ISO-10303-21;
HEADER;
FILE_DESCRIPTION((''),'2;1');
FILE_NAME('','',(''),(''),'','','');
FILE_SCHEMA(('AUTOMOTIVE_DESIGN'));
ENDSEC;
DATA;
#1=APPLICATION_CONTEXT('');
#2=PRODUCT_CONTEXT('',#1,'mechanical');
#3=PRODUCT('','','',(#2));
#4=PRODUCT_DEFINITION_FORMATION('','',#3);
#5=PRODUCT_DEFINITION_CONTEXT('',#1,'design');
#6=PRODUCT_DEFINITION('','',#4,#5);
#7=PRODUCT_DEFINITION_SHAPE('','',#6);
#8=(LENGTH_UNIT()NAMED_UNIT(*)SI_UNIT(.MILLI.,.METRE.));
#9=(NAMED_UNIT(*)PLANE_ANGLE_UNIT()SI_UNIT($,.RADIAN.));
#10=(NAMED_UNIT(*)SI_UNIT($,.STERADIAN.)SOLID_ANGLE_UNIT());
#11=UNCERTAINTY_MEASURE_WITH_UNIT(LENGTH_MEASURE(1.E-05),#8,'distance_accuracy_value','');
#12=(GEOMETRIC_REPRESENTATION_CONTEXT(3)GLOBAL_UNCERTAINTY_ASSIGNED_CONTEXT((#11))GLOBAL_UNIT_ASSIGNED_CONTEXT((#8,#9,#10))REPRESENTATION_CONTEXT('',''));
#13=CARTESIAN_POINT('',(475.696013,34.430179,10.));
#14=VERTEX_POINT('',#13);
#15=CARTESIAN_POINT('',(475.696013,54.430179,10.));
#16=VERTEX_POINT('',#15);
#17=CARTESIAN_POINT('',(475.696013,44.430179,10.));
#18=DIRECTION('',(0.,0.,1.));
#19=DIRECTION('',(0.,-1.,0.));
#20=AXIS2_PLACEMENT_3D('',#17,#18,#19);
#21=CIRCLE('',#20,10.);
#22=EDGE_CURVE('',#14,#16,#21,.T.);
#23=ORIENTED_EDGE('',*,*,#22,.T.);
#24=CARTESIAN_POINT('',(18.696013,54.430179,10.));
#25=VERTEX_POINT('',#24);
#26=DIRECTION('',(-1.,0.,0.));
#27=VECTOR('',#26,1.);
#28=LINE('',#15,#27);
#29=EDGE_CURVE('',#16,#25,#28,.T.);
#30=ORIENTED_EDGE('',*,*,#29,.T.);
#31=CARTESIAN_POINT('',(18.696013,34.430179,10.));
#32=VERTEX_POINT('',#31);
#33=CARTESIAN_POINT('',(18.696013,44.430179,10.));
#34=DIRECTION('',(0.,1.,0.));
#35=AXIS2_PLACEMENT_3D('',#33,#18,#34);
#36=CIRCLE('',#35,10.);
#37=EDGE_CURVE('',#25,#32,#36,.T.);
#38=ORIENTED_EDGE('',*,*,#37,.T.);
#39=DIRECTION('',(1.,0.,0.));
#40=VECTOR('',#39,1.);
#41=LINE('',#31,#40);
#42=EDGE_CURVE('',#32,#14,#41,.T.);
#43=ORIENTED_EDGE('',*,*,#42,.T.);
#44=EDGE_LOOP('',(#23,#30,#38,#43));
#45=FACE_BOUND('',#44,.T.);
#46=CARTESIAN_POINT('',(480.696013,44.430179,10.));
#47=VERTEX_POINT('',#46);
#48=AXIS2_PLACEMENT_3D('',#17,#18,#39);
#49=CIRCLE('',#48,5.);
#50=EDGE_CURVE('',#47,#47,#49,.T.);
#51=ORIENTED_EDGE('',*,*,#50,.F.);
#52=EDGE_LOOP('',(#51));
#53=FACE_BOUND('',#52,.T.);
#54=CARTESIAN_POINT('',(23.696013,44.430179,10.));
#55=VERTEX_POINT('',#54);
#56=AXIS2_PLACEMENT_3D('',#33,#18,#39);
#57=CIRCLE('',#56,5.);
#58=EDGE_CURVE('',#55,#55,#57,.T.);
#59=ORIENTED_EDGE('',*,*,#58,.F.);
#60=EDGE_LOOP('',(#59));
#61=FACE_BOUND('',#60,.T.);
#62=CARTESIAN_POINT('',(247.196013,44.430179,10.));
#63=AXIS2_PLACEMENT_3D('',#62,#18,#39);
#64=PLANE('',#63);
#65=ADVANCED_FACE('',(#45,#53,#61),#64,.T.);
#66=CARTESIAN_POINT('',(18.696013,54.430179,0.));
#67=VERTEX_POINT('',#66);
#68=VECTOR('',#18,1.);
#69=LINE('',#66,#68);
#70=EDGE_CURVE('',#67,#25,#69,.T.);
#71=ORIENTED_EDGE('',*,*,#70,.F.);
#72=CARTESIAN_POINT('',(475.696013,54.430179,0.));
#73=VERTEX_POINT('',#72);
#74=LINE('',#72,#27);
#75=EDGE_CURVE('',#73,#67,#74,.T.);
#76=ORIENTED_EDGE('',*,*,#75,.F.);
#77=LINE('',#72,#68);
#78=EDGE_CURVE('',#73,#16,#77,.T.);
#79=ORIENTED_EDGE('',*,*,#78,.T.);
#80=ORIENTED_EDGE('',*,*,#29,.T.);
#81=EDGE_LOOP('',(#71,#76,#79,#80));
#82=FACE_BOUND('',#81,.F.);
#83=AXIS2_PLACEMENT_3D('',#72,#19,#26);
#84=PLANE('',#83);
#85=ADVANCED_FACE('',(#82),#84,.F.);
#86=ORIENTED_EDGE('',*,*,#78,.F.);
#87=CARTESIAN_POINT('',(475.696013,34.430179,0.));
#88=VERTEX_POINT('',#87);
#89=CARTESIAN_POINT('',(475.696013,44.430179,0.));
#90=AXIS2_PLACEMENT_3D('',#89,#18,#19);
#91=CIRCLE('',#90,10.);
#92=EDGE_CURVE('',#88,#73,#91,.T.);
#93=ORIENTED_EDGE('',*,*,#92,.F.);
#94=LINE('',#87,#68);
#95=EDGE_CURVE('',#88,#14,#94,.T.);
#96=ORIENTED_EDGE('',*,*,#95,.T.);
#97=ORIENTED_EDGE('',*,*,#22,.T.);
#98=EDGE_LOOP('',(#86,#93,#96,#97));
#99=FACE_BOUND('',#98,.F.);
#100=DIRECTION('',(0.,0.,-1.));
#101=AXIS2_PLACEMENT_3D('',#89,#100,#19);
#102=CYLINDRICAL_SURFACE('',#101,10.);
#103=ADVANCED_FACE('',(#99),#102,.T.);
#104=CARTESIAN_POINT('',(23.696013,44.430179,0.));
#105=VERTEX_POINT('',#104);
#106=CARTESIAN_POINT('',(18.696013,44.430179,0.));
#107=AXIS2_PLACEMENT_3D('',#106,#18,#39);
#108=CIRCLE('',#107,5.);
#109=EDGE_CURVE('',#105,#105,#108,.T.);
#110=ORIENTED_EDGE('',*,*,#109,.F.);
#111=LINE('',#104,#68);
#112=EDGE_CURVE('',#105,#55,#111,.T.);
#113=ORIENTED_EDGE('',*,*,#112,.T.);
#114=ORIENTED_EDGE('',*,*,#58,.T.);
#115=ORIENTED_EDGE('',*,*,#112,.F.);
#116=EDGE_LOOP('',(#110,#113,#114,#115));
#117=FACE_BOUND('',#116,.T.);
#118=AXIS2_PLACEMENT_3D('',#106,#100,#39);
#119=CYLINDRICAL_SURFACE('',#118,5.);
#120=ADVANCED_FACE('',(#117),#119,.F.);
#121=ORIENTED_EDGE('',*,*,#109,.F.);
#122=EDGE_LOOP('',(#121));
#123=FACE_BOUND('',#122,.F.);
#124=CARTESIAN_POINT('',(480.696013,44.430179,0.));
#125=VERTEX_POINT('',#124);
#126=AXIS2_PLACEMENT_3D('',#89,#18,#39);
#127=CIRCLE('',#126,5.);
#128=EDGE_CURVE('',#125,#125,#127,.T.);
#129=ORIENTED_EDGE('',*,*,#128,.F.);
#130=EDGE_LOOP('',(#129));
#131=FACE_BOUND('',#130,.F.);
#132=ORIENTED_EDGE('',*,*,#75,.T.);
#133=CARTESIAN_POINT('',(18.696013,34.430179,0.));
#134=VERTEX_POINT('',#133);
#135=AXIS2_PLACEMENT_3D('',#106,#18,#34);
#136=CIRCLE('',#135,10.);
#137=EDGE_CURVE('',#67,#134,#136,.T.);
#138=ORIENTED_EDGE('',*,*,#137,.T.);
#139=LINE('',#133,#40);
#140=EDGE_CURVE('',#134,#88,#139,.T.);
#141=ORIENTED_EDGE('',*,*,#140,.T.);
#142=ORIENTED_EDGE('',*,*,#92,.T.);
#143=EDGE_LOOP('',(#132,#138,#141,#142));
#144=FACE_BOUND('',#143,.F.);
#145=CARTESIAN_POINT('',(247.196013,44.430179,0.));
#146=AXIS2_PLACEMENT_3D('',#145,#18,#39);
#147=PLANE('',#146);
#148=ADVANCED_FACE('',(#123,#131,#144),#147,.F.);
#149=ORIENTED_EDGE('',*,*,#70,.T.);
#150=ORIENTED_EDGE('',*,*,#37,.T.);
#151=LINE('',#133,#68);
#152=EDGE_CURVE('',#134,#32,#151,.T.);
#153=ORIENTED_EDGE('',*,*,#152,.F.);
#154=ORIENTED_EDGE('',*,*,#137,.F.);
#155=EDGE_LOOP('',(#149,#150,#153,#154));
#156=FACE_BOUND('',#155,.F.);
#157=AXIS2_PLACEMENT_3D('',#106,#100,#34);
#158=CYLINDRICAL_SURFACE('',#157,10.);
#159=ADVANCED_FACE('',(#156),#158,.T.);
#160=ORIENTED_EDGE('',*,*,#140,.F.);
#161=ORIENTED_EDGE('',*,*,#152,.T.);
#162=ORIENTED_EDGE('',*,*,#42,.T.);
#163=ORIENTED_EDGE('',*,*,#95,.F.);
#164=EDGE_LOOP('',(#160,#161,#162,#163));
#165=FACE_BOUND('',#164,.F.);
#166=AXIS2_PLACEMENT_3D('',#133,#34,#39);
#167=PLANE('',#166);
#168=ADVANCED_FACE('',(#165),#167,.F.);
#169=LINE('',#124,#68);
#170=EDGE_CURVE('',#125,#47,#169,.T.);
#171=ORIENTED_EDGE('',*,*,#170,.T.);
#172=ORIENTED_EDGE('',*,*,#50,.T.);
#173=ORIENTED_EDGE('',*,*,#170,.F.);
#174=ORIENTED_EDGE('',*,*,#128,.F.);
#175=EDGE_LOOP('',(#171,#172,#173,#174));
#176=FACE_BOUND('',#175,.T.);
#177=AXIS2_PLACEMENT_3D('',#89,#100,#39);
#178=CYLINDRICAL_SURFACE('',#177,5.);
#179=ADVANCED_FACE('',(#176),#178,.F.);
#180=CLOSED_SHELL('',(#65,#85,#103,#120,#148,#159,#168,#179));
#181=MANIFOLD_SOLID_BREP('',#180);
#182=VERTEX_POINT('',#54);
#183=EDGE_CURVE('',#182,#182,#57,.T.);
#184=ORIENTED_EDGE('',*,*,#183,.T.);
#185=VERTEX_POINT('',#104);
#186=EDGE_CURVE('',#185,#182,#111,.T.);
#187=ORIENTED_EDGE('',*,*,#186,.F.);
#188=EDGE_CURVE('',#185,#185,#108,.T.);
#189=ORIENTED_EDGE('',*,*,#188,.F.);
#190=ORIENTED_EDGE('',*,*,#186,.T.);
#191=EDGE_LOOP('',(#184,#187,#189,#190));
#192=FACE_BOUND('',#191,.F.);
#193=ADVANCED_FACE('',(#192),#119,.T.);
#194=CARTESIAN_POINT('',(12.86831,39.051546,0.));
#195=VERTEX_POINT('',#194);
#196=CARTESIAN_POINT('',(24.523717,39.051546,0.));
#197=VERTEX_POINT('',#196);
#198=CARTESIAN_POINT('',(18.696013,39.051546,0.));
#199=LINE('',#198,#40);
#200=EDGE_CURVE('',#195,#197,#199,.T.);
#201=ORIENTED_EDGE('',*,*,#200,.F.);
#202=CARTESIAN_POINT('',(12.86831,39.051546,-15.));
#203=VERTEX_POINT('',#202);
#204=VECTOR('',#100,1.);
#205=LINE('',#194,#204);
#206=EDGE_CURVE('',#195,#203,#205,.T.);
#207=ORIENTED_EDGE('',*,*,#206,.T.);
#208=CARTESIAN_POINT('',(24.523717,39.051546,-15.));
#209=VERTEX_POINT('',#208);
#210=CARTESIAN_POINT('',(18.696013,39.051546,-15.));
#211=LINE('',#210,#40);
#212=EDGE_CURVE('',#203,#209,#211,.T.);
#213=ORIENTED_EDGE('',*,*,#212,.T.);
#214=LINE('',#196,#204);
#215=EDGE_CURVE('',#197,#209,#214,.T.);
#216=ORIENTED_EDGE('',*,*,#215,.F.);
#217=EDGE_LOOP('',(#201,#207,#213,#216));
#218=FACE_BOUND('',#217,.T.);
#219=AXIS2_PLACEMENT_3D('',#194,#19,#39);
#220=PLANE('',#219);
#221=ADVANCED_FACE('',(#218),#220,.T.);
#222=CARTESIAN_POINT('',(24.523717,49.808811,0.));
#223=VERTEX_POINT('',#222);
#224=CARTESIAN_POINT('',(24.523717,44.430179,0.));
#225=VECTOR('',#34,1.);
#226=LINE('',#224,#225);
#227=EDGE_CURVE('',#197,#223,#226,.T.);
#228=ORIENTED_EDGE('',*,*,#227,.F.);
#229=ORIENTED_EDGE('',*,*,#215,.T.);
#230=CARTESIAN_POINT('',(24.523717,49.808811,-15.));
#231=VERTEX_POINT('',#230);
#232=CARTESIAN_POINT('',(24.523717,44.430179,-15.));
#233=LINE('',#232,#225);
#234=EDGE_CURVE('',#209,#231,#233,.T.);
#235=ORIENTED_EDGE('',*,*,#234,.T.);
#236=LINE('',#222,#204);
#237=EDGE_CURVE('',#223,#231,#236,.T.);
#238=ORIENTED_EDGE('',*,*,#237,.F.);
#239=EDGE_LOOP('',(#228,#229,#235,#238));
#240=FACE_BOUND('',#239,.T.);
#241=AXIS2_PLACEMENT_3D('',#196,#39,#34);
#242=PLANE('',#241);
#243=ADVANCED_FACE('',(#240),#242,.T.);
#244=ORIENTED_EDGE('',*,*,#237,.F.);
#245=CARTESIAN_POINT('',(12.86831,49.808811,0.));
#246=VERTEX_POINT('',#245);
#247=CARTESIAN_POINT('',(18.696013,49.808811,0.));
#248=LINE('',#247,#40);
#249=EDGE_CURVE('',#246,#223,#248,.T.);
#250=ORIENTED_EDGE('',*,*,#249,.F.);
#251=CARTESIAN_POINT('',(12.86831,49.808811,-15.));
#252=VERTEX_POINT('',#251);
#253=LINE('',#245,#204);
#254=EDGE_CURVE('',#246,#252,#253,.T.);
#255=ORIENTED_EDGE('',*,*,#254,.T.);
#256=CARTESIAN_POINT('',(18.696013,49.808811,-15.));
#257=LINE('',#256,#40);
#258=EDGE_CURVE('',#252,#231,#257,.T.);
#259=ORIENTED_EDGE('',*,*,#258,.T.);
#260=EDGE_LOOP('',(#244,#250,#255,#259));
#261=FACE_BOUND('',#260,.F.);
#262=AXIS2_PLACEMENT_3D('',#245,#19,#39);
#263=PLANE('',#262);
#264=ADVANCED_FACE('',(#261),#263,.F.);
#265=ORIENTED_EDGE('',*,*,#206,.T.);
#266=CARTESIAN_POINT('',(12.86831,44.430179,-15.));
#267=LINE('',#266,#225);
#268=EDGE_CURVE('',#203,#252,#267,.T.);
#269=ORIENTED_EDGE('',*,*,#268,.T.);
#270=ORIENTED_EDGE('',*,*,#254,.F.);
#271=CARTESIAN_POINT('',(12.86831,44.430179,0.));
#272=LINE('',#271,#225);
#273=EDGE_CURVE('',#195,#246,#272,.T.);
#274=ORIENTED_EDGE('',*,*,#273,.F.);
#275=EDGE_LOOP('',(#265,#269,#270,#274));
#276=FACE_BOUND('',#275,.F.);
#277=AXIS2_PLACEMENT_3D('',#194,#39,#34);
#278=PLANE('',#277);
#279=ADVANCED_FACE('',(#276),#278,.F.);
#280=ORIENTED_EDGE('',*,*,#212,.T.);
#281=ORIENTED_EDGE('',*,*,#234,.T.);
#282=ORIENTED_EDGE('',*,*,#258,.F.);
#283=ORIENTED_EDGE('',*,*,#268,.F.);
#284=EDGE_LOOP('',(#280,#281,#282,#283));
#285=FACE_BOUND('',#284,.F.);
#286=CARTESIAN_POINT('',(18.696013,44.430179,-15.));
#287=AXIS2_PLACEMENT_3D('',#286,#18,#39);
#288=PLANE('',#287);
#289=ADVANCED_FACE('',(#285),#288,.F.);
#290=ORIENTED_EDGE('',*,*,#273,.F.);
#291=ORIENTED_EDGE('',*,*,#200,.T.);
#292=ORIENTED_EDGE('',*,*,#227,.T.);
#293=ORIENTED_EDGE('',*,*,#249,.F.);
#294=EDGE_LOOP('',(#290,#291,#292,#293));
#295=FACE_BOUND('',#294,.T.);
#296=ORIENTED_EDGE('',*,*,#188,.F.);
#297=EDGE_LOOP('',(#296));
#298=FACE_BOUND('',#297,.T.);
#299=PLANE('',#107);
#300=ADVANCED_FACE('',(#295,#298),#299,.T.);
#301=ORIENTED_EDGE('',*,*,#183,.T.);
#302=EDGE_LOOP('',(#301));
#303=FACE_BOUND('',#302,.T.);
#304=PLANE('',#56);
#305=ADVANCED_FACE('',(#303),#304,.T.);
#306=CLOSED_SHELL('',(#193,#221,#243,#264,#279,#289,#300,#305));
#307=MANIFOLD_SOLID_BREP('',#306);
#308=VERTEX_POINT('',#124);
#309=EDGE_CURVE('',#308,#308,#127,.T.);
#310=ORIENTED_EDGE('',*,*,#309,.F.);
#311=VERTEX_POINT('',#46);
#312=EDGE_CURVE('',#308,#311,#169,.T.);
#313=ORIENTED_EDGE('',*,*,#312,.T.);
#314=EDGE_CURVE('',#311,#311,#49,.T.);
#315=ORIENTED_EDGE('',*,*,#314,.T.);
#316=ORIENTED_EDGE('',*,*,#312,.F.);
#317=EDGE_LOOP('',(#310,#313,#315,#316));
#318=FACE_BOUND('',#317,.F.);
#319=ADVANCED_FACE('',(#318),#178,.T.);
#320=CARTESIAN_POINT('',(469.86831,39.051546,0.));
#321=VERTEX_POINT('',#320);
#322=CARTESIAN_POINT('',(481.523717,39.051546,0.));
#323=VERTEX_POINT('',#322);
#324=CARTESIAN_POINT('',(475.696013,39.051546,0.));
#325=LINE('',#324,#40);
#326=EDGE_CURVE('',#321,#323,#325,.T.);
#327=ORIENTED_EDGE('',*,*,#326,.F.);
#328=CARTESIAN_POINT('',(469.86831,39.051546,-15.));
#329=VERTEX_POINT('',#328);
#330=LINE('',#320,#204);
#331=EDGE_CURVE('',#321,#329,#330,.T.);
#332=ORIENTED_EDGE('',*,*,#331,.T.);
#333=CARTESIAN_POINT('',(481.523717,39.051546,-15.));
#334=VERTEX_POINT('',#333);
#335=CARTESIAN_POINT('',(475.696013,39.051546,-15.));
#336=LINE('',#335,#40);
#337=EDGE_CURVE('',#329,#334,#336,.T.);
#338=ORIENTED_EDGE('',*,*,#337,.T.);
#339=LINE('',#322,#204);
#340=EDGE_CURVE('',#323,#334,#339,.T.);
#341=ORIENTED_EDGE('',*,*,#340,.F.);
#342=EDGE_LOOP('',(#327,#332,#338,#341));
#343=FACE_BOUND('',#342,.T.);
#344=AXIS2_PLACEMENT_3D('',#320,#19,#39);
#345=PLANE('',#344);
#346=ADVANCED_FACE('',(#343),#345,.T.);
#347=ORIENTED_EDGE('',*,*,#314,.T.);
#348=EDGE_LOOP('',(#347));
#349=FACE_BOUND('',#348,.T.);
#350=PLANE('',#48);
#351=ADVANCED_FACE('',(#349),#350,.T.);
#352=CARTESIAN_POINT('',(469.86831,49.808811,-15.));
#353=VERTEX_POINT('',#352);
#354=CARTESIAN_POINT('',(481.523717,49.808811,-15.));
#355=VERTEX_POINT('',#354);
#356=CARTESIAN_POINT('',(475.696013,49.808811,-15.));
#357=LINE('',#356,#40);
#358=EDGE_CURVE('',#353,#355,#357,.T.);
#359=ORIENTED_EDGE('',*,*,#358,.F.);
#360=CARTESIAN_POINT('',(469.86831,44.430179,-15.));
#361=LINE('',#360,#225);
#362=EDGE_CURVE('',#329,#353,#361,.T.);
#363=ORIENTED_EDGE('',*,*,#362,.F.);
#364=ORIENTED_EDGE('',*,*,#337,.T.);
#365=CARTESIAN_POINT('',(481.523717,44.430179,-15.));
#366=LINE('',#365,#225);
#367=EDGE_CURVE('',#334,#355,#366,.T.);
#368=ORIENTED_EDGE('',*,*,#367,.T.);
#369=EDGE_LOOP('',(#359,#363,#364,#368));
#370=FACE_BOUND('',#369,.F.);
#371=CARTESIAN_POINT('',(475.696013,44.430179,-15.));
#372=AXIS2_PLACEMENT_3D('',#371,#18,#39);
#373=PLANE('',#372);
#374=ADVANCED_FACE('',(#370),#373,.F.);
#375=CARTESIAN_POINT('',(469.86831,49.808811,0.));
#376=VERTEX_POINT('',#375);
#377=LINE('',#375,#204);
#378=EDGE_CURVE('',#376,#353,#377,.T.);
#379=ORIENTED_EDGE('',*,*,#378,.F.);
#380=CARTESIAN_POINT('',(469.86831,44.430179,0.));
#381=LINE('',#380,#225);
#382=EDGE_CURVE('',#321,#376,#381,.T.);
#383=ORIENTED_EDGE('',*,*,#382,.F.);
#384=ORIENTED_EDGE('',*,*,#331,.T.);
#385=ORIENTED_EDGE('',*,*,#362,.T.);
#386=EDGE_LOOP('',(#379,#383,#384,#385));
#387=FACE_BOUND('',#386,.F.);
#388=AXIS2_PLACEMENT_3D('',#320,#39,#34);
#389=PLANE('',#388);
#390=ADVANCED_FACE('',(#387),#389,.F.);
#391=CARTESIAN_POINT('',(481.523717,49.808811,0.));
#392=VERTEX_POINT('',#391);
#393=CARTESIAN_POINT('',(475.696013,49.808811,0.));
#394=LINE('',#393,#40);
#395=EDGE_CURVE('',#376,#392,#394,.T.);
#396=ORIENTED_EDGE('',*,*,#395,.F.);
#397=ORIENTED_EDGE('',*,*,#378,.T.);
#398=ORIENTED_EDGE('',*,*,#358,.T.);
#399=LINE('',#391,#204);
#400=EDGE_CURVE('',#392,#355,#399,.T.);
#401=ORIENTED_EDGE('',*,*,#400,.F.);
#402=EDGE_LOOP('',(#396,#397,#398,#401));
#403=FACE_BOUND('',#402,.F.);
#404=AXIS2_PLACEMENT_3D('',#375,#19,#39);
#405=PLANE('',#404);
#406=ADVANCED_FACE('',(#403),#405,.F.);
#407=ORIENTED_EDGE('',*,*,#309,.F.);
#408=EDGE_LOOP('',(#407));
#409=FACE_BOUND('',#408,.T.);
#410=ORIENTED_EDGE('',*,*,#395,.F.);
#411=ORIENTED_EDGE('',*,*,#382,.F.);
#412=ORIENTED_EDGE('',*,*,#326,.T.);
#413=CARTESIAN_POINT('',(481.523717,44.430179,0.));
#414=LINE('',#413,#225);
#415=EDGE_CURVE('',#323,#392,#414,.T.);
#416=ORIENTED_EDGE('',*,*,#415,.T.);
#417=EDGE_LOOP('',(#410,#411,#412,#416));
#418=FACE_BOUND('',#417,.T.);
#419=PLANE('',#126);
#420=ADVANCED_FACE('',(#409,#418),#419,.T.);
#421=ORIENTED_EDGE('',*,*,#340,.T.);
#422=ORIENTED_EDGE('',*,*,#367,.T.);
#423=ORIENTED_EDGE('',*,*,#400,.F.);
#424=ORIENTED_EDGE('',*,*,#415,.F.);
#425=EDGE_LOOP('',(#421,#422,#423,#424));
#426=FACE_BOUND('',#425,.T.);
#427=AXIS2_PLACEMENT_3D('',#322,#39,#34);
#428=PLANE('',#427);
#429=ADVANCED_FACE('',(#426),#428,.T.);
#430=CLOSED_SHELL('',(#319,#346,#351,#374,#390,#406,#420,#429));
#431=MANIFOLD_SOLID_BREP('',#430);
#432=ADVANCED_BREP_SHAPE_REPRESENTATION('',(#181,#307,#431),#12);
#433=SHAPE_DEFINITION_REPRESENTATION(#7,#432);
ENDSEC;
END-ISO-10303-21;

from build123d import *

# Parameters (mm, degrees)
F0_R     = 5
F1_DEPTH = 10
F2_W     = 11.6554063559
F2_H     = 10.7572656125
F3_DEPTH = 15
F4_DEPTH = 10


with BuildPart() as f1:
    # F0 (on Top) → F1 (new body)
    with BuildSketch(Plane.XY):
        with BuildLine():
            Line((475.696013391, 54.4301785901), (18.696013391, 54.4301785901))
            ThreePointArc((18.696013391, 54.4301785901), (8.696013391, 44.4301785901), (18.696013391, 34.4301785901))
            Line((18.696013391, 34.4301785901), (475.696013391, 34.4301785901))
            ThreePointArc((475.696013391, 34.4301785901), (485.696013391, 44.4301785901), (475.696013391, 54.4301785901))
        make_face()
        with Locations((18.696013391, 44.4301785901)):
            Circle(F0_R, mode=Mode.SUBTRACT)
        with Locations((475.696013391, 44.4301785901)):
            Circle(F0_R, mode=Mode.SUBTRACT)
    extrude(amount=F1_DEPTH)


with BuildPart() as f3:
    # F2 (on Top) → F3 (new body)
    with BuildSketch(Plane.XY):
        with Locations((18.696013391, 44.4301785901)):
            Rectangle(F2_W, F2_H)
    extrude(amount=-F3_DEPTH)

    # F0 (on Top) → F4 (join)
    with BuildSketch(Plane.XY):
        with Locations((18.696013391, 44.4301785901)):
            Circle(F0_R)
    extrude(amount=F4_DEPTH)


with BuildPart() as f3b:
    # F2 (on Top) → F3, piece 2 (new body)
    with BuildSketch(Plane.XY):
        with Locations((475.696013391, 44.4301785901)):
            Rectangle(F2_W, F2_H)
    extrude(amount=-F3_DEPTH)

    # F0 (on Top) → F4, piece 2 (join)
    with BuildSketch(Plane.XY):
        with Locations((475.696013391, 44.4301785901)):
            Circle(F0_R)
    extrude(amount=F4_DEPTH)


solid = Compound([f1.part, f3.part, f3b.part])
